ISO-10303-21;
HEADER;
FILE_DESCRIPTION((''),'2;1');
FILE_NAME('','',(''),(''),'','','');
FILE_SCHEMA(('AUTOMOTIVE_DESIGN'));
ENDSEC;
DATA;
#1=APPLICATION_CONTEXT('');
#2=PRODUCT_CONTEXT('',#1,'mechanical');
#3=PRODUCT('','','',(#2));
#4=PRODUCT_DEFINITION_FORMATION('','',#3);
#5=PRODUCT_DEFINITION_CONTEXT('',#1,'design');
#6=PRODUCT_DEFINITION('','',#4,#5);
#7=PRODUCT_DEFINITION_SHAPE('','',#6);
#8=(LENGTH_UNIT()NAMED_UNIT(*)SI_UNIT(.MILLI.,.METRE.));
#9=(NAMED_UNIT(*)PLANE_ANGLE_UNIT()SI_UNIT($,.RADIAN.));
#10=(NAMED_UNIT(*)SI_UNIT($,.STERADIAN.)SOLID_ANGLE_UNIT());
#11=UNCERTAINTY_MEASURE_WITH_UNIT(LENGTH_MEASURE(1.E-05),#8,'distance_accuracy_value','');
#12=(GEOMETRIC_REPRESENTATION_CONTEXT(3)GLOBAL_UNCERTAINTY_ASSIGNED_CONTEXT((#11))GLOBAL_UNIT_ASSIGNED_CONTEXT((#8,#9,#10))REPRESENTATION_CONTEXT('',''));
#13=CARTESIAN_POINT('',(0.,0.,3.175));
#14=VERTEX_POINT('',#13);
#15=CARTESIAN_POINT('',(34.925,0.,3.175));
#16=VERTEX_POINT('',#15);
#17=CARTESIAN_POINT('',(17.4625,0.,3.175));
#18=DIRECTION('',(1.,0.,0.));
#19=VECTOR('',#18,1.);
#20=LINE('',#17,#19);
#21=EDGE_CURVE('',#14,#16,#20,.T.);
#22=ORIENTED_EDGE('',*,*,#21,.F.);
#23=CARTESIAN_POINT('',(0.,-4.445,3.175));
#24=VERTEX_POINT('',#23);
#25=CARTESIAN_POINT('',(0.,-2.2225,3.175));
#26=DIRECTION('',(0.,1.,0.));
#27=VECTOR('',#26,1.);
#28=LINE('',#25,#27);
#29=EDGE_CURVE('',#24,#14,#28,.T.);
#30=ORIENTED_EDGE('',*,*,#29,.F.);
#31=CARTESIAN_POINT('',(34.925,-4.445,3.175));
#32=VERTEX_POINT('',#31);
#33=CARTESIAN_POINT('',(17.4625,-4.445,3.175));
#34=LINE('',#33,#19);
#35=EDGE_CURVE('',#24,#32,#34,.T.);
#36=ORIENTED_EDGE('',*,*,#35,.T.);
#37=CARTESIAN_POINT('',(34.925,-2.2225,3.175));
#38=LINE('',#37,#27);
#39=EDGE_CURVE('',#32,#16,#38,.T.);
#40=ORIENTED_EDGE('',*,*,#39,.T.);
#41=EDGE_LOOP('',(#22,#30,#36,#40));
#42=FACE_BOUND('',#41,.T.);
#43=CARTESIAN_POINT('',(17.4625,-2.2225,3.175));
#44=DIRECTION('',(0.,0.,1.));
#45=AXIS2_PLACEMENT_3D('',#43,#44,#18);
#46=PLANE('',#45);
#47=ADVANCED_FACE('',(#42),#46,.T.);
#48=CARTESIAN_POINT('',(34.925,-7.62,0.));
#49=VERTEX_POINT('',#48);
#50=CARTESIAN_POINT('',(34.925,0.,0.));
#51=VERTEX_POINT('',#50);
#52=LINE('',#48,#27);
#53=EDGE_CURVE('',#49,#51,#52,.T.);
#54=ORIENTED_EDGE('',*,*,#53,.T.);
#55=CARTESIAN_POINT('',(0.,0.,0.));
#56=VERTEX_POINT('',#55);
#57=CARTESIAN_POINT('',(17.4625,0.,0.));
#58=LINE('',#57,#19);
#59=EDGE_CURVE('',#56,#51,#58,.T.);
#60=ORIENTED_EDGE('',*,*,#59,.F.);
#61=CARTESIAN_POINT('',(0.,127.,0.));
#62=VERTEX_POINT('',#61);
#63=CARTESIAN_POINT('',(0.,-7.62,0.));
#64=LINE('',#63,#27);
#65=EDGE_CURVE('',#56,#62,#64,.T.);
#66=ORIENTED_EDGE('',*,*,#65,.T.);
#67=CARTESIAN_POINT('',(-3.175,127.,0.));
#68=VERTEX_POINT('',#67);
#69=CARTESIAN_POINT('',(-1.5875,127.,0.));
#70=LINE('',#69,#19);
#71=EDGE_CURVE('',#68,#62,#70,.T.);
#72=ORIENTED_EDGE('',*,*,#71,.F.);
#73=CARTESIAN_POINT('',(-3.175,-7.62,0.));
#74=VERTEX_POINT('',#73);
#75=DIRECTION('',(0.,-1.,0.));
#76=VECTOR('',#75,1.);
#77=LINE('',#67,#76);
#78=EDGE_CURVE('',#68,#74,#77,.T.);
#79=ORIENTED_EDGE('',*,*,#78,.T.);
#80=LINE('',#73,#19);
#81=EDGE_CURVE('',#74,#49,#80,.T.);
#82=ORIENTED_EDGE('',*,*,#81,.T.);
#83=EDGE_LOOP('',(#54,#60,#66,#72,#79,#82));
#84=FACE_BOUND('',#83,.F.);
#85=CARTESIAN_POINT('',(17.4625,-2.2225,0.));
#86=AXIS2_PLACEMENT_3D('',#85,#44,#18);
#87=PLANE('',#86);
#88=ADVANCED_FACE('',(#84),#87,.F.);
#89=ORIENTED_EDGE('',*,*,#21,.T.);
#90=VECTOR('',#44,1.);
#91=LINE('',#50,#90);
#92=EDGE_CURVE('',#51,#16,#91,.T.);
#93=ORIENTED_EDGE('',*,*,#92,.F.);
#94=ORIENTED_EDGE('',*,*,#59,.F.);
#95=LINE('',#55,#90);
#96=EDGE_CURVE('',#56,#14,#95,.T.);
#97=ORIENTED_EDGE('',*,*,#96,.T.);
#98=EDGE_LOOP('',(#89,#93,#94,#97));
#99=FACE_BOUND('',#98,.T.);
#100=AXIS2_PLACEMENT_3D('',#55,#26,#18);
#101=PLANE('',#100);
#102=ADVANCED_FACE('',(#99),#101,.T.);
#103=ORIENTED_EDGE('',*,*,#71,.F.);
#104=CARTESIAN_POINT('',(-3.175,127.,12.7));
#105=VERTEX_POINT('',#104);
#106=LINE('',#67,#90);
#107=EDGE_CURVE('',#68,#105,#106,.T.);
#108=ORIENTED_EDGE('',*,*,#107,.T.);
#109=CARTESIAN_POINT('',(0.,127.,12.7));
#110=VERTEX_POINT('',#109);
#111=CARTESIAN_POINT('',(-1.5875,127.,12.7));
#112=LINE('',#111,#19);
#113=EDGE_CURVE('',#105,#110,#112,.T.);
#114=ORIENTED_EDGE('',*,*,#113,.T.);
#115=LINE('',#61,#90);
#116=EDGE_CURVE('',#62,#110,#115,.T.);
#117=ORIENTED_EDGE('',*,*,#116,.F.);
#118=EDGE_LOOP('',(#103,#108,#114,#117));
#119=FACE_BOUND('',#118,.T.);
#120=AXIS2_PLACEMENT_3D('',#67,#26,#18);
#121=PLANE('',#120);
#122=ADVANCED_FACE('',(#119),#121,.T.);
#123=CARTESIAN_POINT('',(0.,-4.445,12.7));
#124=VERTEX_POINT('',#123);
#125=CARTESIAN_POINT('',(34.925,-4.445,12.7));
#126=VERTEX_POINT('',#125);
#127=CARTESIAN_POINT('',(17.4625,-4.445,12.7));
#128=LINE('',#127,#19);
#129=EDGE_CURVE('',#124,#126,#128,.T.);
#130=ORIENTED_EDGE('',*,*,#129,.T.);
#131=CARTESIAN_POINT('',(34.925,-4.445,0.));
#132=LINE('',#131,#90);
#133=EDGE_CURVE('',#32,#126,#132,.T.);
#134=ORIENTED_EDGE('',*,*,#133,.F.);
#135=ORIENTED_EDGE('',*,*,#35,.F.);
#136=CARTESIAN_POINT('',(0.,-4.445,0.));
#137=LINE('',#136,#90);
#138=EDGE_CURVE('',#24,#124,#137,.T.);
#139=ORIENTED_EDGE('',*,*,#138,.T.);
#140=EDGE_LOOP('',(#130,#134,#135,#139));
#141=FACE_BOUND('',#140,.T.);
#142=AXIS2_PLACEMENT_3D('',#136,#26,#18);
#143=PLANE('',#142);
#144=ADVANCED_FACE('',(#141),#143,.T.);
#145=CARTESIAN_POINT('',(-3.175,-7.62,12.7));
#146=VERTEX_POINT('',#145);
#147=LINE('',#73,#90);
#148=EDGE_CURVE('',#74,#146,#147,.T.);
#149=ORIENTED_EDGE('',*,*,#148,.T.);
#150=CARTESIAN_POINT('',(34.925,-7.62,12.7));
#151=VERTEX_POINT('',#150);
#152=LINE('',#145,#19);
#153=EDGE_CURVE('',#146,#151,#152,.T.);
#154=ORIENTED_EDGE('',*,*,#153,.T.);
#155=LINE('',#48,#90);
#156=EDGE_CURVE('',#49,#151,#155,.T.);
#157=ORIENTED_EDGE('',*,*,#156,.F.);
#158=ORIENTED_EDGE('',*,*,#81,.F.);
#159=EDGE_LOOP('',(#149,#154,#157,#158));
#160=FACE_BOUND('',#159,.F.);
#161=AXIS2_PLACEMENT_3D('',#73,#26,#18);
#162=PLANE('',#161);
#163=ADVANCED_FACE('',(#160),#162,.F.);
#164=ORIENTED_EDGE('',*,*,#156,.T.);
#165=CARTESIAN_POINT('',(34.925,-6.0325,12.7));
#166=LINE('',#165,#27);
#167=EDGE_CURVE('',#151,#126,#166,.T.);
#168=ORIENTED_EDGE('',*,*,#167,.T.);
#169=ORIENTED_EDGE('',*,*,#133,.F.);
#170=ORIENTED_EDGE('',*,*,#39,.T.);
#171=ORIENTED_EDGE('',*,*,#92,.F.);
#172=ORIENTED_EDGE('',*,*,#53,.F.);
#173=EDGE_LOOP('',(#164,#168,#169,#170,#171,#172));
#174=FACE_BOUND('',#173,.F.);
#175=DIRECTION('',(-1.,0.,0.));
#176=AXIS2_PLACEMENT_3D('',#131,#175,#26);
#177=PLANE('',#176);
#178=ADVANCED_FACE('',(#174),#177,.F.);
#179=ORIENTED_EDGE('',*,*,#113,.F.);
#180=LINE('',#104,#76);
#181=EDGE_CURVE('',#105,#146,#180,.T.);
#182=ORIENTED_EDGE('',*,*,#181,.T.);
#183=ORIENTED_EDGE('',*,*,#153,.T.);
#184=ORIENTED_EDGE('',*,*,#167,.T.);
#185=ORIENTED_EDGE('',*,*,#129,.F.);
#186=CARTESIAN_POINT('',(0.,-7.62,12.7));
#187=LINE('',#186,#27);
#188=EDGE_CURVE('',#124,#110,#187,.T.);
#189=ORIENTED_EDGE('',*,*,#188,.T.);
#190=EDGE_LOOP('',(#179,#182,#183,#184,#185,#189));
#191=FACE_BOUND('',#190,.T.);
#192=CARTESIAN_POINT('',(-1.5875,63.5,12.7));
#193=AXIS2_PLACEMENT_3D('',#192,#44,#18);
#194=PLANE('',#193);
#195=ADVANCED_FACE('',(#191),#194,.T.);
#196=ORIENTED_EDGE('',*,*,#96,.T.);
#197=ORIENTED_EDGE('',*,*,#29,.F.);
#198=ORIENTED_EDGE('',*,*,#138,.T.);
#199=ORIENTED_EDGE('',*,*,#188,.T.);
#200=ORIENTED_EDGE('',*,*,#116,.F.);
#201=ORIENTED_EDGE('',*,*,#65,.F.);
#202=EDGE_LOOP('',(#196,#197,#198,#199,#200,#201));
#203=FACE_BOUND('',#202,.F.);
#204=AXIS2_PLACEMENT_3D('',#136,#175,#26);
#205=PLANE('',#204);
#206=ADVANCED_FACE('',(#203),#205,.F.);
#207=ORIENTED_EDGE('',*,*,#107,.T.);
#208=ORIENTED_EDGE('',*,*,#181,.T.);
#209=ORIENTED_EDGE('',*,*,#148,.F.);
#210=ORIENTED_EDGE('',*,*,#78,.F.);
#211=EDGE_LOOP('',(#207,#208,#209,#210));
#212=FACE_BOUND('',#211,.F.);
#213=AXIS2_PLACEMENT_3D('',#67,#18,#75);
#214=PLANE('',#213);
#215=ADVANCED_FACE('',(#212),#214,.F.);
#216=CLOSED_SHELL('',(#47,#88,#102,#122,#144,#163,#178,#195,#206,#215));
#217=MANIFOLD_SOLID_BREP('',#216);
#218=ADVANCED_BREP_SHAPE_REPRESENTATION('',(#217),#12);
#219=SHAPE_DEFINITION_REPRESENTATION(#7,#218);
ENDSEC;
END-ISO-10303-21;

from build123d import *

# Parameters (mm, degrees)
F0_W     = 3.175
F0_H     = 127
F0_H_2   = 4.445
F0_H_3   = 3.175
F0_W_2   = 34.925
F1_DEPTH = 12.7
F2_DEPTH = 3.175


# Not quite as in the source:
# - a length typed as a fraction of an inch, garbled in the dataset ("3 / 203.2 mm" for 3/8 in), is restored


with BuildPart() as f1:
    # F0 (on Top) → F1 (new body)
    with BuildSketch(Plane.XY):
        with Locations((-1.5875, 63.5)):
            Rectangle(F0_W, F0_H)
        with Locations((-1.5875, -2.2225)):
            Rectangle(F0_W, F0_H_2)
        with Locations((-1.5875, -6.0325)):
            Rectangle(F0_W, F0_H_3)
        with Locations((17.4625, -6.0325)):
            Rectangle(F0_W_2, F0_H_3)
    extrude(amount=F1_DEPTH)

    # F0 (on Top) → F2 (join)
    with BuildSketch(Plane.XY):
        with Locations((17.4625, -2.2225)):
            Rectangle(F0_W_2, F0_H_2)
    extrude(amount=F2_DEPTH)


solid = f1.part
